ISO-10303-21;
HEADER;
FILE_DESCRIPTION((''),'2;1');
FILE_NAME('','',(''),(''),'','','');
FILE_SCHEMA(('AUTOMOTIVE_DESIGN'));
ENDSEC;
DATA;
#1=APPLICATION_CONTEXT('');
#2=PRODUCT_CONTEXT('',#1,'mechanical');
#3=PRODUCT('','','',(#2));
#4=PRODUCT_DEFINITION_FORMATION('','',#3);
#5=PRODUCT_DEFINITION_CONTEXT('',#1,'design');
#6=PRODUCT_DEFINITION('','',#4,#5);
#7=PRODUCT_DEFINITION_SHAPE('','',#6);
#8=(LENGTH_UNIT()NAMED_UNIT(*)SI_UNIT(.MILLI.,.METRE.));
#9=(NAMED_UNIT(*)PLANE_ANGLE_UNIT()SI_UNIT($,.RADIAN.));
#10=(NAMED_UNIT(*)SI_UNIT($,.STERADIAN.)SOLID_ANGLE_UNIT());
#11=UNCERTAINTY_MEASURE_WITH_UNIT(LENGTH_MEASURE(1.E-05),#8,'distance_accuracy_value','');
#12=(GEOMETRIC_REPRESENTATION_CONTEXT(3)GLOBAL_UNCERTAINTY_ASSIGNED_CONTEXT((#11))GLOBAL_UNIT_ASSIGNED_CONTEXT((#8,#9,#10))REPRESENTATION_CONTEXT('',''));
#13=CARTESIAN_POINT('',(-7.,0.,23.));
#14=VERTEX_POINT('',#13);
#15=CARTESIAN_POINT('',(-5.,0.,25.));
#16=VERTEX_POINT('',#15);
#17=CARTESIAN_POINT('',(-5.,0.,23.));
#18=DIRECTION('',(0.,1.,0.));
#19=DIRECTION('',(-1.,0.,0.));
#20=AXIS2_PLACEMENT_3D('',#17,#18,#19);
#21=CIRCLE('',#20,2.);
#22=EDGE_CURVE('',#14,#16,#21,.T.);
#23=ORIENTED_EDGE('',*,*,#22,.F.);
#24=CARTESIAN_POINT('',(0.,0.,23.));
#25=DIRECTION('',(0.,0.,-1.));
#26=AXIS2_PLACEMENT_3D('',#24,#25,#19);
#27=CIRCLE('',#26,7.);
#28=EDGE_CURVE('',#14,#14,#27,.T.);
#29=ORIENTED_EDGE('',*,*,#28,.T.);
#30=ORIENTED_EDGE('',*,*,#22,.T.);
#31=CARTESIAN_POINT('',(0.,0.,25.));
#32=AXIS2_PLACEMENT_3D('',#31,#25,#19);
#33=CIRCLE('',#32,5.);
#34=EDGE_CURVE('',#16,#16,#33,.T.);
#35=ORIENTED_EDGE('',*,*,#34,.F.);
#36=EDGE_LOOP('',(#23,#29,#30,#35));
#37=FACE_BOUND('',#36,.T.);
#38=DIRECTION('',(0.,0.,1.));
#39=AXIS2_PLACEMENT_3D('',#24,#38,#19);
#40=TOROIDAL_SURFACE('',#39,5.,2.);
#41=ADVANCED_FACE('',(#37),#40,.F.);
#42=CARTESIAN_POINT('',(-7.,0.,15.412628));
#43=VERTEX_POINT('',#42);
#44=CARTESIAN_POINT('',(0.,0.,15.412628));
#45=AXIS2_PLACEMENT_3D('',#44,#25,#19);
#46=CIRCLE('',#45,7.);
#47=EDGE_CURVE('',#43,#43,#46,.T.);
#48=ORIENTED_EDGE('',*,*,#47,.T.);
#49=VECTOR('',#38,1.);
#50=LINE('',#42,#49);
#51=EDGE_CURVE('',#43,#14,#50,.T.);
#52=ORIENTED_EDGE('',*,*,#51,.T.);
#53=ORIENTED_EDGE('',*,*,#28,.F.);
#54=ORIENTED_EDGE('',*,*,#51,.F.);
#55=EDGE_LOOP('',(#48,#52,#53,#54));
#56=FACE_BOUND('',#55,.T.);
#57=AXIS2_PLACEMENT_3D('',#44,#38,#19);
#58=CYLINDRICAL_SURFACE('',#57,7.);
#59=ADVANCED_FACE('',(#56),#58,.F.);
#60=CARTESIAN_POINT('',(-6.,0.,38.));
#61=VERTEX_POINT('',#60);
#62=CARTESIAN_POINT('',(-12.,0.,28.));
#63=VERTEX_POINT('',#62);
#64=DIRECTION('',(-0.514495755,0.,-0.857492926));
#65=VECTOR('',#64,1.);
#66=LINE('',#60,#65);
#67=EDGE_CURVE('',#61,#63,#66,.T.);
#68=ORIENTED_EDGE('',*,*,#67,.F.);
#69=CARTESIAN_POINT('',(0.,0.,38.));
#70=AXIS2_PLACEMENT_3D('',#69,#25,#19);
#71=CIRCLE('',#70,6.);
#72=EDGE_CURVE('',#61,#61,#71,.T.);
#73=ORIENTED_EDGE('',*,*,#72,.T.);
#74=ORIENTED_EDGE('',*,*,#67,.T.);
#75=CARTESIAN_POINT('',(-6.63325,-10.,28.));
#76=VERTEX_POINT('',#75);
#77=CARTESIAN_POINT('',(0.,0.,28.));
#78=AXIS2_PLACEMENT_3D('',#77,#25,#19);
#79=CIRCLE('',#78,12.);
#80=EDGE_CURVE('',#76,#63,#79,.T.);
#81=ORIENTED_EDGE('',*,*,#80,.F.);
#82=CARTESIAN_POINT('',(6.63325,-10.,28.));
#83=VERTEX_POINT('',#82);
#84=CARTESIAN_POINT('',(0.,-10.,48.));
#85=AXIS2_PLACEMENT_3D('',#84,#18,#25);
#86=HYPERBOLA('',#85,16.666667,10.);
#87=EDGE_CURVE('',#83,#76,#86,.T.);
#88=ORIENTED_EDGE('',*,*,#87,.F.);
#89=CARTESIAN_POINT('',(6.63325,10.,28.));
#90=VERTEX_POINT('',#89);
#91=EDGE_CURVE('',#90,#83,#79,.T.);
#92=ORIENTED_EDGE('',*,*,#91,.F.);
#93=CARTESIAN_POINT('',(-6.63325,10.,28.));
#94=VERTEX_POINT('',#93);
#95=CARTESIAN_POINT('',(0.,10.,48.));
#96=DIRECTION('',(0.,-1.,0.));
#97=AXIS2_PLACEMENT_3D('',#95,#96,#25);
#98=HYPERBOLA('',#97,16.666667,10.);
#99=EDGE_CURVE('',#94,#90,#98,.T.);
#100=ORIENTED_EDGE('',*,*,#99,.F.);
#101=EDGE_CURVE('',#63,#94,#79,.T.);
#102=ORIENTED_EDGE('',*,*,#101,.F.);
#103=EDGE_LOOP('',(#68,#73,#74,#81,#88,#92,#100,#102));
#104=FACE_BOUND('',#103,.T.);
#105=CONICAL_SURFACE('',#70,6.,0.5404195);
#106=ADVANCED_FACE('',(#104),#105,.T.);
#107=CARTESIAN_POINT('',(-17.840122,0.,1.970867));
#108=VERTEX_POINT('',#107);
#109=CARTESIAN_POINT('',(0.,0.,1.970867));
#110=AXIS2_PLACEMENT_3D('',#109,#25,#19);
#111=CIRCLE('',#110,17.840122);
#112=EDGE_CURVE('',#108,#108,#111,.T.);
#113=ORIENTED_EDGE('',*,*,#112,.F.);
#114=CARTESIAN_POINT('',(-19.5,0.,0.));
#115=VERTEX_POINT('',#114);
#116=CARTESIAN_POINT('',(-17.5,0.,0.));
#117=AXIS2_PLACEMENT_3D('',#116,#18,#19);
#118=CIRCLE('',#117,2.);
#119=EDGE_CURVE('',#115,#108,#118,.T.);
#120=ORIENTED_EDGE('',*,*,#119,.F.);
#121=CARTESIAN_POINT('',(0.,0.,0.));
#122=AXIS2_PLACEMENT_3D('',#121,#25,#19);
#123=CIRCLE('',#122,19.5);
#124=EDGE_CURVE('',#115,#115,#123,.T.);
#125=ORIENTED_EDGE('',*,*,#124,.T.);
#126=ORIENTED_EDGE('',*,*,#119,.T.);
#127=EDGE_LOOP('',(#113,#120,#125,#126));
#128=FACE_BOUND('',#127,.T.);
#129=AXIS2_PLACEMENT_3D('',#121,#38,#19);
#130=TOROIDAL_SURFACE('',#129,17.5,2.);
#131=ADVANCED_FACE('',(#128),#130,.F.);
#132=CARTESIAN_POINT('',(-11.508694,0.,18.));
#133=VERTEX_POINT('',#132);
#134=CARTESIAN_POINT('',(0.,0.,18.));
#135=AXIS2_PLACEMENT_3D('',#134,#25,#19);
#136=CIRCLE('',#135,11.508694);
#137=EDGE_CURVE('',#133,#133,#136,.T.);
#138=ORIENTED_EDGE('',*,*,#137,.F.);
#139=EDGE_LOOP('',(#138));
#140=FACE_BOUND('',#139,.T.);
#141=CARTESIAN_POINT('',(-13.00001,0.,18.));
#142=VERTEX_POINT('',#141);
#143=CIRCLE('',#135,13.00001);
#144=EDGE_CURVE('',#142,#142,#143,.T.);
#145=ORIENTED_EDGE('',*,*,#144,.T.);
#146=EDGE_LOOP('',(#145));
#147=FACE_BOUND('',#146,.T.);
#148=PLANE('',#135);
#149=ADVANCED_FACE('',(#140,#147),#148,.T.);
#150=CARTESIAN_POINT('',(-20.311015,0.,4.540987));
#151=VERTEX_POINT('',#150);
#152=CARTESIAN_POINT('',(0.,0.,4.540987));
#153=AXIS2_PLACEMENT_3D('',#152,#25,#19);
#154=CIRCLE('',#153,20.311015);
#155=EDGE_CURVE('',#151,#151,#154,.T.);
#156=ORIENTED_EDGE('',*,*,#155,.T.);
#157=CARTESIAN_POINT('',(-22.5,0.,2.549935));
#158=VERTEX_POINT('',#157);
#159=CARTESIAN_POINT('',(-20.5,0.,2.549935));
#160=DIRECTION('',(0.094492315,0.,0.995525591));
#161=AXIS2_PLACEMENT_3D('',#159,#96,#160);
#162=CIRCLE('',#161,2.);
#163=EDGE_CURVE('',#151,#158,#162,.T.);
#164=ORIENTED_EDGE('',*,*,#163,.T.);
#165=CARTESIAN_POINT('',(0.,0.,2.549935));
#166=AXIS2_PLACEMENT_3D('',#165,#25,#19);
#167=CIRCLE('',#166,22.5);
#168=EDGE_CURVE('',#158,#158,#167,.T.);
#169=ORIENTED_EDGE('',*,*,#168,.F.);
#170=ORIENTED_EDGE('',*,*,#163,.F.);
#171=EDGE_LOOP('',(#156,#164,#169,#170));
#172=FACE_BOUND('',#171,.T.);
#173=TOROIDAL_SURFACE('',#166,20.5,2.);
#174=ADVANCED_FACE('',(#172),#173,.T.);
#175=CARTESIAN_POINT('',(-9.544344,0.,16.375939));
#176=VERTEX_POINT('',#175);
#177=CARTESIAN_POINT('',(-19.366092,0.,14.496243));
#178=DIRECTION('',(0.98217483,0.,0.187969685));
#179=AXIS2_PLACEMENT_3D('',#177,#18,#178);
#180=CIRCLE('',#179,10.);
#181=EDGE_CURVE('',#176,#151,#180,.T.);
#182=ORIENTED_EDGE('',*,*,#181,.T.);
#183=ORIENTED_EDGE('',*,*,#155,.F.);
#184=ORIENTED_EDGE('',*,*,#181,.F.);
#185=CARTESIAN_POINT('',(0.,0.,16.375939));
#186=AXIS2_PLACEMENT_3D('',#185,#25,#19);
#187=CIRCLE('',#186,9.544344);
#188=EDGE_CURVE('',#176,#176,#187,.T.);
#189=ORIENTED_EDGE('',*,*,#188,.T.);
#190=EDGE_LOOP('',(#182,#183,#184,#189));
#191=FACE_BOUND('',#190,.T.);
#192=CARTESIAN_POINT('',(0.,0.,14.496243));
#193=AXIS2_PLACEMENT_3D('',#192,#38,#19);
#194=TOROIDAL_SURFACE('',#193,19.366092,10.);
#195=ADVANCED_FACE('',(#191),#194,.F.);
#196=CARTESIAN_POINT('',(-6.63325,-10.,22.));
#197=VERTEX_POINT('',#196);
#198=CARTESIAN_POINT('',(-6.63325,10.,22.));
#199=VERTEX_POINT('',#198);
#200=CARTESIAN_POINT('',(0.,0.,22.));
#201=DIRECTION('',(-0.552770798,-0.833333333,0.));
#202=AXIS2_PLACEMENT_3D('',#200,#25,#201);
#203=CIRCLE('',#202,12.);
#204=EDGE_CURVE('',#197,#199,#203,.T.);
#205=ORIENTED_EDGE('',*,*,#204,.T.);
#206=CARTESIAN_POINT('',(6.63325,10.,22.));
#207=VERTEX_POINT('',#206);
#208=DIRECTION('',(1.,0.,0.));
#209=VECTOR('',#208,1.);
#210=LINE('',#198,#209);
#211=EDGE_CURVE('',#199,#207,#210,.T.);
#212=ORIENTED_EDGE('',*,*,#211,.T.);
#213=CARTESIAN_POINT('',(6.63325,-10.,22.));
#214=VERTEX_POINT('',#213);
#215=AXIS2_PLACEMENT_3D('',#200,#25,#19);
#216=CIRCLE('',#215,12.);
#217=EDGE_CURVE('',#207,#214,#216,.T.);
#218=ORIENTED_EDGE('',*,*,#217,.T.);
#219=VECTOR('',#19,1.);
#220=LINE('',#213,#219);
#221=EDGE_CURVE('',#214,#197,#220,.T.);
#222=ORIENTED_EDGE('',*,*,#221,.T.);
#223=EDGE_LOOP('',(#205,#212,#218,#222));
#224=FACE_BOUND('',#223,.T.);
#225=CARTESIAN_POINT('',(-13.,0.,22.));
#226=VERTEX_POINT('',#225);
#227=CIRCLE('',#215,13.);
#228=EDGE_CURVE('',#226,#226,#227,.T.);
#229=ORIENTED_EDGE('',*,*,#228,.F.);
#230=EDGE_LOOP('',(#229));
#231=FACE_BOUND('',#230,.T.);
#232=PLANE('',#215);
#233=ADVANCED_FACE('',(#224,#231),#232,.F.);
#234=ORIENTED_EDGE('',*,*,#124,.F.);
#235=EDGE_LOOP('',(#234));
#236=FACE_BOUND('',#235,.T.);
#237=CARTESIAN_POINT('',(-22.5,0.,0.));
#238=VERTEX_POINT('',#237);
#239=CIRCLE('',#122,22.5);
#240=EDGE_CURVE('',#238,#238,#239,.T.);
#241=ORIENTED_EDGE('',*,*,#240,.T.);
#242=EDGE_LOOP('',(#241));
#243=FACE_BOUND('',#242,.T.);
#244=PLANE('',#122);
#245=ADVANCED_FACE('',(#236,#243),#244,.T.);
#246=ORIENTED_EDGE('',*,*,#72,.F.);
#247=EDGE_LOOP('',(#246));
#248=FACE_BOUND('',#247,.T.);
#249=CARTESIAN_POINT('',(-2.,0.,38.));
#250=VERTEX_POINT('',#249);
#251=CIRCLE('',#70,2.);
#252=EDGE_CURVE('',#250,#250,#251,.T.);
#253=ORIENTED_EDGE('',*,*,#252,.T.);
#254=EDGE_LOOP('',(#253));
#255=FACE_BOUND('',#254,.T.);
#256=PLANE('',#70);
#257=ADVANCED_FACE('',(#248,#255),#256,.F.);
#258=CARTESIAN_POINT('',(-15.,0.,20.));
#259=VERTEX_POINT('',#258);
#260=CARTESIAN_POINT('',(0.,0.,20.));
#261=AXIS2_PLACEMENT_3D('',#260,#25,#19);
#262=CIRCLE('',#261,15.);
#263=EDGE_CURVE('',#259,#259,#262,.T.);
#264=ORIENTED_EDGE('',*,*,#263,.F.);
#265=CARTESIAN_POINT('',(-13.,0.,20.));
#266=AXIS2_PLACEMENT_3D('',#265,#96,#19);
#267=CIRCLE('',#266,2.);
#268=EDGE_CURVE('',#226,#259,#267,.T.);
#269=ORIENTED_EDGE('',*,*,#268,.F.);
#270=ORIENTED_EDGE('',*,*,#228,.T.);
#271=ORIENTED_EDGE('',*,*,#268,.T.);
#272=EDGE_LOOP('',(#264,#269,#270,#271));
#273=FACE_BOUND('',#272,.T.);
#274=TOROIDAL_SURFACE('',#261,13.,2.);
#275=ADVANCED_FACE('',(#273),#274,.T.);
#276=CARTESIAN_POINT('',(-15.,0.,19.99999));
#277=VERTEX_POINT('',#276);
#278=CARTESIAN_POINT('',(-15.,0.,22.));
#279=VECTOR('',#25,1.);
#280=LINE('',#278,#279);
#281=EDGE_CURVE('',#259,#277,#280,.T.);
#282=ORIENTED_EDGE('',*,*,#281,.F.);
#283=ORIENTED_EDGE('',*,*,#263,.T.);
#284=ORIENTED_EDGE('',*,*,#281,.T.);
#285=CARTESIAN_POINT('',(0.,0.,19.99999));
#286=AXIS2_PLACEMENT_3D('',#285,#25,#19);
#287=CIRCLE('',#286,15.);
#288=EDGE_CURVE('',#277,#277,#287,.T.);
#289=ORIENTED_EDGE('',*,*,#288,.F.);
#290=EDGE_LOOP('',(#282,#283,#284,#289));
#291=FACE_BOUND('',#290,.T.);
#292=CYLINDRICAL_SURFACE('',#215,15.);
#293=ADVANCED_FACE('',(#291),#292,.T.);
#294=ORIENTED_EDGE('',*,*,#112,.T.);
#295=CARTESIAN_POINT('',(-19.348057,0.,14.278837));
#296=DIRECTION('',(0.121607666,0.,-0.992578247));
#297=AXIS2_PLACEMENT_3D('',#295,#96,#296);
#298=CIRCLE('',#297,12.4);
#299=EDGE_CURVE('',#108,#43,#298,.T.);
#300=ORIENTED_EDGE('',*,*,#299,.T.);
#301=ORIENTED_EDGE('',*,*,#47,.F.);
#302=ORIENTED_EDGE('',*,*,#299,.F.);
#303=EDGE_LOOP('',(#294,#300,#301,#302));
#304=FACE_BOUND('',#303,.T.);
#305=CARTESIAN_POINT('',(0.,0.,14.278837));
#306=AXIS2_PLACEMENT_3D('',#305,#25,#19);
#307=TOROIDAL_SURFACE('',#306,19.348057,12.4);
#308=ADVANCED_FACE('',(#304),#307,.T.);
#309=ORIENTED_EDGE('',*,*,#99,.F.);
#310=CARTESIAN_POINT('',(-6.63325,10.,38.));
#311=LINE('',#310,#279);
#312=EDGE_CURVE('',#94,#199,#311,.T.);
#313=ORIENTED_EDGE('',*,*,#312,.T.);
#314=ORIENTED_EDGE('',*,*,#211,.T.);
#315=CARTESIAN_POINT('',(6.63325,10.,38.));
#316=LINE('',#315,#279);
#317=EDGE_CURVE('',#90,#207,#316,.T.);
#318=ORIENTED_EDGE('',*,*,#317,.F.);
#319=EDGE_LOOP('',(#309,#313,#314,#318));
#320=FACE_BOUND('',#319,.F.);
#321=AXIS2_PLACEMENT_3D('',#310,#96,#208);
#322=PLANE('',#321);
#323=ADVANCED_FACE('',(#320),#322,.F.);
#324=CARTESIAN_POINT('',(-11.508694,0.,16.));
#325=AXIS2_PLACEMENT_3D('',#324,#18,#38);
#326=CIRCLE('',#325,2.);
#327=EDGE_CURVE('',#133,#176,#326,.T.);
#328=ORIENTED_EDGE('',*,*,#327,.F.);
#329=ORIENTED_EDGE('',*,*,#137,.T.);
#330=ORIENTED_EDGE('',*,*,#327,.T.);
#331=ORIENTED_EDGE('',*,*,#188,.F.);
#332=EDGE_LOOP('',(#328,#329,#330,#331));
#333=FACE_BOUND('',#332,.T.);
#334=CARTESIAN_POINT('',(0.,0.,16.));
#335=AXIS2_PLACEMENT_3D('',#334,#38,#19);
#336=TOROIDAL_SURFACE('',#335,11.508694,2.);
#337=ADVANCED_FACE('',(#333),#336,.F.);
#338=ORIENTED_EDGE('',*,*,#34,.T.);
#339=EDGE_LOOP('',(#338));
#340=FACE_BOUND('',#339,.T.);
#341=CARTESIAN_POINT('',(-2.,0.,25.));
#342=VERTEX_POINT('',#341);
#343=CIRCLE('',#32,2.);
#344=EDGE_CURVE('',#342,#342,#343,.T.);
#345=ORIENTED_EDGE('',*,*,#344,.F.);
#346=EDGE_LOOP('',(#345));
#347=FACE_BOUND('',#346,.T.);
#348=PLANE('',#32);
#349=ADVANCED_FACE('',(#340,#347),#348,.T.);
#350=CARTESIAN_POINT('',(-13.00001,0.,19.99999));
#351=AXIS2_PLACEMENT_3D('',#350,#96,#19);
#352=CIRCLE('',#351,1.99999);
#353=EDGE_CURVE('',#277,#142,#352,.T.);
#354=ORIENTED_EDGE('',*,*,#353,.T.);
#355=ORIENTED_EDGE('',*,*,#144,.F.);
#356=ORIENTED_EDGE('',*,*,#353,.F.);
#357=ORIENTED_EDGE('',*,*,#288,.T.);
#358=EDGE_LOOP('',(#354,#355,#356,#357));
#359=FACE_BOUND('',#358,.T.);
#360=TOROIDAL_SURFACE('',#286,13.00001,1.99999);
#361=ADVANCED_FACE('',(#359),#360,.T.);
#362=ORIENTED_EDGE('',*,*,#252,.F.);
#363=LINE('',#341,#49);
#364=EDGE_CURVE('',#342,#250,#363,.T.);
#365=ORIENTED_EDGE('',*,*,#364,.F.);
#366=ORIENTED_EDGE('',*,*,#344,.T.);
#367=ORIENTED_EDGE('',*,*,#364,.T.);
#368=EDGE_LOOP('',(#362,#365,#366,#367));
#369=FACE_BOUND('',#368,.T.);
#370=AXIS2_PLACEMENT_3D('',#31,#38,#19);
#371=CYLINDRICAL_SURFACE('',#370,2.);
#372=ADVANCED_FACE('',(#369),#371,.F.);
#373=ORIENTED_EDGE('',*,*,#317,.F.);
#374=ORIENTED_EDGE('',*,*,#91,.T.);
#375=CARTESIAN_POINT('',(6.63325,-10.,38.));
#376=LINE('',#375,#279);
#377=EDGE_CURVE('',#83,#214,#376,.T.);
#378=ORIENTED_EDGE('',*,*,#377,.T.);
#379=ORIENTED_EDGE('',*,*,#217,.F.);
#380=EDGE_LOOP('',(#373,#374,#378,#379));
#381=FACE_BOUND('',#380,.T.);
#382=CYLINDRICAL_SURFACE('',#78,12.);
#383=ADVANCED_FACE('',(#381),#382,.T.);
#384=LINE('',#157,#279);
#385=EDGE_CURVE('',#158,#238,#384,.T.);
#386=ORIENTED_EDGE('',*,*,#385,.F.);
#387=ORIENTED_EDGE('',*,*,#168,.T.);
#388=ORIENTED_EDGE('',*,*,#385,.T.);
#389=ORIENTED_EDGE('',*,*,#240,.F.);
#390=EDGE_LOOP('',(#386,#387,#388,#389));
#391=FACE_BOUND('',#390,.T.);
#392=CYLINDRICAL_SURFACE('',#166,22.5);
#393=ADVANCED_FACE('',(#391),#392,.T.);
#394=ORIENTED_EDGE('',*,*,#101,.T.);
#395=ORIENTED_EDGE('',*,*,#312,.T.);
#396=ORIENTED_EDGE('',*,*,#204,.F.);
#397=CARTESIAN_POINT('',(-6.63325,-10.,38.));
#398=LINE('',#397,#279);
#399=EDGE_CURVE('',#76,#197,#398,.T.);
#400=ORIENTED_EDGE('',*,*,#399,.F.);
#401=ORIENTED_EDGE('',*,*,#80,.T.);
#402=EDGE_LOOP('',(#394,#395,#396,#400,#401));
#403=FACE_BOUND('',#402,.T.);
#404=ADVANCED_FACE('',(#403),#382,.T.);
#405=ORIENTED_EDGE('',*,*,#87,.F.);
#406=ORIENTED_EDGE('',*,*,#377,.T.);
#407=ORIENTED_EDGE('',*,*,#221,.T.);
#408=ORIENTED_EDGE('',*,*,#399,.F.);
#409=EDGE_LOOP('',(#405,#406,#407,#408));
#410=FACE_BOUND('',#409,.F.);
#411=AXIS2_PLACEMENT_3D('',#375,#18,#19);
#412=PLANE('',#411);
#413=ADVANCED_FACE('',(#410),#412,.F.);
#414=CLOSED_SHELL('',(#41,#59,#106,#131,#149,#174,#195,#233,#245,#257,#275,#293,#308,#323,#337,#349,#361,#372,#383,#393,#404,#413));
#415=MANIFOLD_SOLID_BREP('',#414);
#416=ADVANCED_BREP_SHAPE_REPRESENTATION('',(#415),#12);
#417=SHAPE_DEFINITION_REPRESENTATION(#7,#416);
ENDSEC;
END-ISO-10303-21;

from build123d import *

# Parameters (mm, degrees)
F2_R     = 2
F3_R     = 1.99999
F5_DEPTH = 16


# Not quite as in the source:
# - a fillet or chamfer is up to 0.001 mm smaller than in the source, because OpenCascade refuses the exact size


with BuildPart() as f1:
    # F0 (on Front) → F1 (revolve)
    with BuildSketch(Plane.XZ):
        with BuildLine():
            Line((-2, 25), (-2, 38))
            Line((-2, 38), (-6, 38))
            Line((-6, 38), (-12, 28))
            Line((-12, 28), (-12, 22))
            Line((-12, 22), (-15, 22))
            Line((-15, 22), (-15, 18))
            Line((-15, 18), (-11.5086935796, 18))
            ThreePointArc((-11.5086935796, 18), (-10.2343072055, 17.5414082423), (-9.5443439187, 16.3759393693))
            ThreePointArc((-9.5443439187, 16.3759393693), (-11.9690635692, 7.766906219), (-20.3110153706, 4.540986612))
            ThreePointArc((-20.3110153706, 4.540986612), (-21.8457397113, 4.0294571869), (-22.5, 2.5499354299))
            Line((-22.5, 2.5499354299), (-22.5, 0))
            Line((-22.5, 0), (-19.5, 0))
            ThreePointArc((-19.5, 0), (-19.029745792, 1.2883624536), (-17.8401221881, 1.970867042))
            ThreePointArc((-17.8401221881, 1.970867042), (-9.6957329077, 6.4947102095), (-7, 15.4126280071))
            Line((-7, 15.4126280071), (-7, 23))
            ThreePointArc((-7, 23), (-6.4142135624, 24.4142135624), (-5, 25))
            Line((-5, 25), (-2, 25))
        make_face()
    revolve(axis=Axis((0, 0, 32.4923060834), (0, 0, -1)))

    # F2
    f2_edges = [f1.edges().sort_by_distance(p)[0] for p in [
        (15, 0, 22),
    ]]
    fillet(f2_edges, radius=F2_R)

    # F3 (radius 2 in the source; OpenCascade refuses exactly that, so slightly less here)
    f3_edges = [f1.edges().sort_by_distance(p)[0] for p in [
        (15, 0, 18),
    ]]
    fillet(f3_edges, radius=F3_R)

    # F4 (on face) → F5 (cut)
    with BuildSketch(Plane.XY.offset(38)):
        with BuildLine():
            Line((-6.6332495807, 10), (6.6332495807, 10))
            ThreePointArc((6.6332495807, 10), (0, 12), (-6.6332495807, 10))
        make_face()
        with BuildLine():
            ThreePointArc((-6.6332495807, -10), (0, -12), (6.6332495807, -10))
            Line((6.6332495807, -10), (-6.6332495807, -10))
        make_face()
    extrude(amount=-F5_DEPTH, mode=Mode.SUBTRACT)


solid = f1.part
